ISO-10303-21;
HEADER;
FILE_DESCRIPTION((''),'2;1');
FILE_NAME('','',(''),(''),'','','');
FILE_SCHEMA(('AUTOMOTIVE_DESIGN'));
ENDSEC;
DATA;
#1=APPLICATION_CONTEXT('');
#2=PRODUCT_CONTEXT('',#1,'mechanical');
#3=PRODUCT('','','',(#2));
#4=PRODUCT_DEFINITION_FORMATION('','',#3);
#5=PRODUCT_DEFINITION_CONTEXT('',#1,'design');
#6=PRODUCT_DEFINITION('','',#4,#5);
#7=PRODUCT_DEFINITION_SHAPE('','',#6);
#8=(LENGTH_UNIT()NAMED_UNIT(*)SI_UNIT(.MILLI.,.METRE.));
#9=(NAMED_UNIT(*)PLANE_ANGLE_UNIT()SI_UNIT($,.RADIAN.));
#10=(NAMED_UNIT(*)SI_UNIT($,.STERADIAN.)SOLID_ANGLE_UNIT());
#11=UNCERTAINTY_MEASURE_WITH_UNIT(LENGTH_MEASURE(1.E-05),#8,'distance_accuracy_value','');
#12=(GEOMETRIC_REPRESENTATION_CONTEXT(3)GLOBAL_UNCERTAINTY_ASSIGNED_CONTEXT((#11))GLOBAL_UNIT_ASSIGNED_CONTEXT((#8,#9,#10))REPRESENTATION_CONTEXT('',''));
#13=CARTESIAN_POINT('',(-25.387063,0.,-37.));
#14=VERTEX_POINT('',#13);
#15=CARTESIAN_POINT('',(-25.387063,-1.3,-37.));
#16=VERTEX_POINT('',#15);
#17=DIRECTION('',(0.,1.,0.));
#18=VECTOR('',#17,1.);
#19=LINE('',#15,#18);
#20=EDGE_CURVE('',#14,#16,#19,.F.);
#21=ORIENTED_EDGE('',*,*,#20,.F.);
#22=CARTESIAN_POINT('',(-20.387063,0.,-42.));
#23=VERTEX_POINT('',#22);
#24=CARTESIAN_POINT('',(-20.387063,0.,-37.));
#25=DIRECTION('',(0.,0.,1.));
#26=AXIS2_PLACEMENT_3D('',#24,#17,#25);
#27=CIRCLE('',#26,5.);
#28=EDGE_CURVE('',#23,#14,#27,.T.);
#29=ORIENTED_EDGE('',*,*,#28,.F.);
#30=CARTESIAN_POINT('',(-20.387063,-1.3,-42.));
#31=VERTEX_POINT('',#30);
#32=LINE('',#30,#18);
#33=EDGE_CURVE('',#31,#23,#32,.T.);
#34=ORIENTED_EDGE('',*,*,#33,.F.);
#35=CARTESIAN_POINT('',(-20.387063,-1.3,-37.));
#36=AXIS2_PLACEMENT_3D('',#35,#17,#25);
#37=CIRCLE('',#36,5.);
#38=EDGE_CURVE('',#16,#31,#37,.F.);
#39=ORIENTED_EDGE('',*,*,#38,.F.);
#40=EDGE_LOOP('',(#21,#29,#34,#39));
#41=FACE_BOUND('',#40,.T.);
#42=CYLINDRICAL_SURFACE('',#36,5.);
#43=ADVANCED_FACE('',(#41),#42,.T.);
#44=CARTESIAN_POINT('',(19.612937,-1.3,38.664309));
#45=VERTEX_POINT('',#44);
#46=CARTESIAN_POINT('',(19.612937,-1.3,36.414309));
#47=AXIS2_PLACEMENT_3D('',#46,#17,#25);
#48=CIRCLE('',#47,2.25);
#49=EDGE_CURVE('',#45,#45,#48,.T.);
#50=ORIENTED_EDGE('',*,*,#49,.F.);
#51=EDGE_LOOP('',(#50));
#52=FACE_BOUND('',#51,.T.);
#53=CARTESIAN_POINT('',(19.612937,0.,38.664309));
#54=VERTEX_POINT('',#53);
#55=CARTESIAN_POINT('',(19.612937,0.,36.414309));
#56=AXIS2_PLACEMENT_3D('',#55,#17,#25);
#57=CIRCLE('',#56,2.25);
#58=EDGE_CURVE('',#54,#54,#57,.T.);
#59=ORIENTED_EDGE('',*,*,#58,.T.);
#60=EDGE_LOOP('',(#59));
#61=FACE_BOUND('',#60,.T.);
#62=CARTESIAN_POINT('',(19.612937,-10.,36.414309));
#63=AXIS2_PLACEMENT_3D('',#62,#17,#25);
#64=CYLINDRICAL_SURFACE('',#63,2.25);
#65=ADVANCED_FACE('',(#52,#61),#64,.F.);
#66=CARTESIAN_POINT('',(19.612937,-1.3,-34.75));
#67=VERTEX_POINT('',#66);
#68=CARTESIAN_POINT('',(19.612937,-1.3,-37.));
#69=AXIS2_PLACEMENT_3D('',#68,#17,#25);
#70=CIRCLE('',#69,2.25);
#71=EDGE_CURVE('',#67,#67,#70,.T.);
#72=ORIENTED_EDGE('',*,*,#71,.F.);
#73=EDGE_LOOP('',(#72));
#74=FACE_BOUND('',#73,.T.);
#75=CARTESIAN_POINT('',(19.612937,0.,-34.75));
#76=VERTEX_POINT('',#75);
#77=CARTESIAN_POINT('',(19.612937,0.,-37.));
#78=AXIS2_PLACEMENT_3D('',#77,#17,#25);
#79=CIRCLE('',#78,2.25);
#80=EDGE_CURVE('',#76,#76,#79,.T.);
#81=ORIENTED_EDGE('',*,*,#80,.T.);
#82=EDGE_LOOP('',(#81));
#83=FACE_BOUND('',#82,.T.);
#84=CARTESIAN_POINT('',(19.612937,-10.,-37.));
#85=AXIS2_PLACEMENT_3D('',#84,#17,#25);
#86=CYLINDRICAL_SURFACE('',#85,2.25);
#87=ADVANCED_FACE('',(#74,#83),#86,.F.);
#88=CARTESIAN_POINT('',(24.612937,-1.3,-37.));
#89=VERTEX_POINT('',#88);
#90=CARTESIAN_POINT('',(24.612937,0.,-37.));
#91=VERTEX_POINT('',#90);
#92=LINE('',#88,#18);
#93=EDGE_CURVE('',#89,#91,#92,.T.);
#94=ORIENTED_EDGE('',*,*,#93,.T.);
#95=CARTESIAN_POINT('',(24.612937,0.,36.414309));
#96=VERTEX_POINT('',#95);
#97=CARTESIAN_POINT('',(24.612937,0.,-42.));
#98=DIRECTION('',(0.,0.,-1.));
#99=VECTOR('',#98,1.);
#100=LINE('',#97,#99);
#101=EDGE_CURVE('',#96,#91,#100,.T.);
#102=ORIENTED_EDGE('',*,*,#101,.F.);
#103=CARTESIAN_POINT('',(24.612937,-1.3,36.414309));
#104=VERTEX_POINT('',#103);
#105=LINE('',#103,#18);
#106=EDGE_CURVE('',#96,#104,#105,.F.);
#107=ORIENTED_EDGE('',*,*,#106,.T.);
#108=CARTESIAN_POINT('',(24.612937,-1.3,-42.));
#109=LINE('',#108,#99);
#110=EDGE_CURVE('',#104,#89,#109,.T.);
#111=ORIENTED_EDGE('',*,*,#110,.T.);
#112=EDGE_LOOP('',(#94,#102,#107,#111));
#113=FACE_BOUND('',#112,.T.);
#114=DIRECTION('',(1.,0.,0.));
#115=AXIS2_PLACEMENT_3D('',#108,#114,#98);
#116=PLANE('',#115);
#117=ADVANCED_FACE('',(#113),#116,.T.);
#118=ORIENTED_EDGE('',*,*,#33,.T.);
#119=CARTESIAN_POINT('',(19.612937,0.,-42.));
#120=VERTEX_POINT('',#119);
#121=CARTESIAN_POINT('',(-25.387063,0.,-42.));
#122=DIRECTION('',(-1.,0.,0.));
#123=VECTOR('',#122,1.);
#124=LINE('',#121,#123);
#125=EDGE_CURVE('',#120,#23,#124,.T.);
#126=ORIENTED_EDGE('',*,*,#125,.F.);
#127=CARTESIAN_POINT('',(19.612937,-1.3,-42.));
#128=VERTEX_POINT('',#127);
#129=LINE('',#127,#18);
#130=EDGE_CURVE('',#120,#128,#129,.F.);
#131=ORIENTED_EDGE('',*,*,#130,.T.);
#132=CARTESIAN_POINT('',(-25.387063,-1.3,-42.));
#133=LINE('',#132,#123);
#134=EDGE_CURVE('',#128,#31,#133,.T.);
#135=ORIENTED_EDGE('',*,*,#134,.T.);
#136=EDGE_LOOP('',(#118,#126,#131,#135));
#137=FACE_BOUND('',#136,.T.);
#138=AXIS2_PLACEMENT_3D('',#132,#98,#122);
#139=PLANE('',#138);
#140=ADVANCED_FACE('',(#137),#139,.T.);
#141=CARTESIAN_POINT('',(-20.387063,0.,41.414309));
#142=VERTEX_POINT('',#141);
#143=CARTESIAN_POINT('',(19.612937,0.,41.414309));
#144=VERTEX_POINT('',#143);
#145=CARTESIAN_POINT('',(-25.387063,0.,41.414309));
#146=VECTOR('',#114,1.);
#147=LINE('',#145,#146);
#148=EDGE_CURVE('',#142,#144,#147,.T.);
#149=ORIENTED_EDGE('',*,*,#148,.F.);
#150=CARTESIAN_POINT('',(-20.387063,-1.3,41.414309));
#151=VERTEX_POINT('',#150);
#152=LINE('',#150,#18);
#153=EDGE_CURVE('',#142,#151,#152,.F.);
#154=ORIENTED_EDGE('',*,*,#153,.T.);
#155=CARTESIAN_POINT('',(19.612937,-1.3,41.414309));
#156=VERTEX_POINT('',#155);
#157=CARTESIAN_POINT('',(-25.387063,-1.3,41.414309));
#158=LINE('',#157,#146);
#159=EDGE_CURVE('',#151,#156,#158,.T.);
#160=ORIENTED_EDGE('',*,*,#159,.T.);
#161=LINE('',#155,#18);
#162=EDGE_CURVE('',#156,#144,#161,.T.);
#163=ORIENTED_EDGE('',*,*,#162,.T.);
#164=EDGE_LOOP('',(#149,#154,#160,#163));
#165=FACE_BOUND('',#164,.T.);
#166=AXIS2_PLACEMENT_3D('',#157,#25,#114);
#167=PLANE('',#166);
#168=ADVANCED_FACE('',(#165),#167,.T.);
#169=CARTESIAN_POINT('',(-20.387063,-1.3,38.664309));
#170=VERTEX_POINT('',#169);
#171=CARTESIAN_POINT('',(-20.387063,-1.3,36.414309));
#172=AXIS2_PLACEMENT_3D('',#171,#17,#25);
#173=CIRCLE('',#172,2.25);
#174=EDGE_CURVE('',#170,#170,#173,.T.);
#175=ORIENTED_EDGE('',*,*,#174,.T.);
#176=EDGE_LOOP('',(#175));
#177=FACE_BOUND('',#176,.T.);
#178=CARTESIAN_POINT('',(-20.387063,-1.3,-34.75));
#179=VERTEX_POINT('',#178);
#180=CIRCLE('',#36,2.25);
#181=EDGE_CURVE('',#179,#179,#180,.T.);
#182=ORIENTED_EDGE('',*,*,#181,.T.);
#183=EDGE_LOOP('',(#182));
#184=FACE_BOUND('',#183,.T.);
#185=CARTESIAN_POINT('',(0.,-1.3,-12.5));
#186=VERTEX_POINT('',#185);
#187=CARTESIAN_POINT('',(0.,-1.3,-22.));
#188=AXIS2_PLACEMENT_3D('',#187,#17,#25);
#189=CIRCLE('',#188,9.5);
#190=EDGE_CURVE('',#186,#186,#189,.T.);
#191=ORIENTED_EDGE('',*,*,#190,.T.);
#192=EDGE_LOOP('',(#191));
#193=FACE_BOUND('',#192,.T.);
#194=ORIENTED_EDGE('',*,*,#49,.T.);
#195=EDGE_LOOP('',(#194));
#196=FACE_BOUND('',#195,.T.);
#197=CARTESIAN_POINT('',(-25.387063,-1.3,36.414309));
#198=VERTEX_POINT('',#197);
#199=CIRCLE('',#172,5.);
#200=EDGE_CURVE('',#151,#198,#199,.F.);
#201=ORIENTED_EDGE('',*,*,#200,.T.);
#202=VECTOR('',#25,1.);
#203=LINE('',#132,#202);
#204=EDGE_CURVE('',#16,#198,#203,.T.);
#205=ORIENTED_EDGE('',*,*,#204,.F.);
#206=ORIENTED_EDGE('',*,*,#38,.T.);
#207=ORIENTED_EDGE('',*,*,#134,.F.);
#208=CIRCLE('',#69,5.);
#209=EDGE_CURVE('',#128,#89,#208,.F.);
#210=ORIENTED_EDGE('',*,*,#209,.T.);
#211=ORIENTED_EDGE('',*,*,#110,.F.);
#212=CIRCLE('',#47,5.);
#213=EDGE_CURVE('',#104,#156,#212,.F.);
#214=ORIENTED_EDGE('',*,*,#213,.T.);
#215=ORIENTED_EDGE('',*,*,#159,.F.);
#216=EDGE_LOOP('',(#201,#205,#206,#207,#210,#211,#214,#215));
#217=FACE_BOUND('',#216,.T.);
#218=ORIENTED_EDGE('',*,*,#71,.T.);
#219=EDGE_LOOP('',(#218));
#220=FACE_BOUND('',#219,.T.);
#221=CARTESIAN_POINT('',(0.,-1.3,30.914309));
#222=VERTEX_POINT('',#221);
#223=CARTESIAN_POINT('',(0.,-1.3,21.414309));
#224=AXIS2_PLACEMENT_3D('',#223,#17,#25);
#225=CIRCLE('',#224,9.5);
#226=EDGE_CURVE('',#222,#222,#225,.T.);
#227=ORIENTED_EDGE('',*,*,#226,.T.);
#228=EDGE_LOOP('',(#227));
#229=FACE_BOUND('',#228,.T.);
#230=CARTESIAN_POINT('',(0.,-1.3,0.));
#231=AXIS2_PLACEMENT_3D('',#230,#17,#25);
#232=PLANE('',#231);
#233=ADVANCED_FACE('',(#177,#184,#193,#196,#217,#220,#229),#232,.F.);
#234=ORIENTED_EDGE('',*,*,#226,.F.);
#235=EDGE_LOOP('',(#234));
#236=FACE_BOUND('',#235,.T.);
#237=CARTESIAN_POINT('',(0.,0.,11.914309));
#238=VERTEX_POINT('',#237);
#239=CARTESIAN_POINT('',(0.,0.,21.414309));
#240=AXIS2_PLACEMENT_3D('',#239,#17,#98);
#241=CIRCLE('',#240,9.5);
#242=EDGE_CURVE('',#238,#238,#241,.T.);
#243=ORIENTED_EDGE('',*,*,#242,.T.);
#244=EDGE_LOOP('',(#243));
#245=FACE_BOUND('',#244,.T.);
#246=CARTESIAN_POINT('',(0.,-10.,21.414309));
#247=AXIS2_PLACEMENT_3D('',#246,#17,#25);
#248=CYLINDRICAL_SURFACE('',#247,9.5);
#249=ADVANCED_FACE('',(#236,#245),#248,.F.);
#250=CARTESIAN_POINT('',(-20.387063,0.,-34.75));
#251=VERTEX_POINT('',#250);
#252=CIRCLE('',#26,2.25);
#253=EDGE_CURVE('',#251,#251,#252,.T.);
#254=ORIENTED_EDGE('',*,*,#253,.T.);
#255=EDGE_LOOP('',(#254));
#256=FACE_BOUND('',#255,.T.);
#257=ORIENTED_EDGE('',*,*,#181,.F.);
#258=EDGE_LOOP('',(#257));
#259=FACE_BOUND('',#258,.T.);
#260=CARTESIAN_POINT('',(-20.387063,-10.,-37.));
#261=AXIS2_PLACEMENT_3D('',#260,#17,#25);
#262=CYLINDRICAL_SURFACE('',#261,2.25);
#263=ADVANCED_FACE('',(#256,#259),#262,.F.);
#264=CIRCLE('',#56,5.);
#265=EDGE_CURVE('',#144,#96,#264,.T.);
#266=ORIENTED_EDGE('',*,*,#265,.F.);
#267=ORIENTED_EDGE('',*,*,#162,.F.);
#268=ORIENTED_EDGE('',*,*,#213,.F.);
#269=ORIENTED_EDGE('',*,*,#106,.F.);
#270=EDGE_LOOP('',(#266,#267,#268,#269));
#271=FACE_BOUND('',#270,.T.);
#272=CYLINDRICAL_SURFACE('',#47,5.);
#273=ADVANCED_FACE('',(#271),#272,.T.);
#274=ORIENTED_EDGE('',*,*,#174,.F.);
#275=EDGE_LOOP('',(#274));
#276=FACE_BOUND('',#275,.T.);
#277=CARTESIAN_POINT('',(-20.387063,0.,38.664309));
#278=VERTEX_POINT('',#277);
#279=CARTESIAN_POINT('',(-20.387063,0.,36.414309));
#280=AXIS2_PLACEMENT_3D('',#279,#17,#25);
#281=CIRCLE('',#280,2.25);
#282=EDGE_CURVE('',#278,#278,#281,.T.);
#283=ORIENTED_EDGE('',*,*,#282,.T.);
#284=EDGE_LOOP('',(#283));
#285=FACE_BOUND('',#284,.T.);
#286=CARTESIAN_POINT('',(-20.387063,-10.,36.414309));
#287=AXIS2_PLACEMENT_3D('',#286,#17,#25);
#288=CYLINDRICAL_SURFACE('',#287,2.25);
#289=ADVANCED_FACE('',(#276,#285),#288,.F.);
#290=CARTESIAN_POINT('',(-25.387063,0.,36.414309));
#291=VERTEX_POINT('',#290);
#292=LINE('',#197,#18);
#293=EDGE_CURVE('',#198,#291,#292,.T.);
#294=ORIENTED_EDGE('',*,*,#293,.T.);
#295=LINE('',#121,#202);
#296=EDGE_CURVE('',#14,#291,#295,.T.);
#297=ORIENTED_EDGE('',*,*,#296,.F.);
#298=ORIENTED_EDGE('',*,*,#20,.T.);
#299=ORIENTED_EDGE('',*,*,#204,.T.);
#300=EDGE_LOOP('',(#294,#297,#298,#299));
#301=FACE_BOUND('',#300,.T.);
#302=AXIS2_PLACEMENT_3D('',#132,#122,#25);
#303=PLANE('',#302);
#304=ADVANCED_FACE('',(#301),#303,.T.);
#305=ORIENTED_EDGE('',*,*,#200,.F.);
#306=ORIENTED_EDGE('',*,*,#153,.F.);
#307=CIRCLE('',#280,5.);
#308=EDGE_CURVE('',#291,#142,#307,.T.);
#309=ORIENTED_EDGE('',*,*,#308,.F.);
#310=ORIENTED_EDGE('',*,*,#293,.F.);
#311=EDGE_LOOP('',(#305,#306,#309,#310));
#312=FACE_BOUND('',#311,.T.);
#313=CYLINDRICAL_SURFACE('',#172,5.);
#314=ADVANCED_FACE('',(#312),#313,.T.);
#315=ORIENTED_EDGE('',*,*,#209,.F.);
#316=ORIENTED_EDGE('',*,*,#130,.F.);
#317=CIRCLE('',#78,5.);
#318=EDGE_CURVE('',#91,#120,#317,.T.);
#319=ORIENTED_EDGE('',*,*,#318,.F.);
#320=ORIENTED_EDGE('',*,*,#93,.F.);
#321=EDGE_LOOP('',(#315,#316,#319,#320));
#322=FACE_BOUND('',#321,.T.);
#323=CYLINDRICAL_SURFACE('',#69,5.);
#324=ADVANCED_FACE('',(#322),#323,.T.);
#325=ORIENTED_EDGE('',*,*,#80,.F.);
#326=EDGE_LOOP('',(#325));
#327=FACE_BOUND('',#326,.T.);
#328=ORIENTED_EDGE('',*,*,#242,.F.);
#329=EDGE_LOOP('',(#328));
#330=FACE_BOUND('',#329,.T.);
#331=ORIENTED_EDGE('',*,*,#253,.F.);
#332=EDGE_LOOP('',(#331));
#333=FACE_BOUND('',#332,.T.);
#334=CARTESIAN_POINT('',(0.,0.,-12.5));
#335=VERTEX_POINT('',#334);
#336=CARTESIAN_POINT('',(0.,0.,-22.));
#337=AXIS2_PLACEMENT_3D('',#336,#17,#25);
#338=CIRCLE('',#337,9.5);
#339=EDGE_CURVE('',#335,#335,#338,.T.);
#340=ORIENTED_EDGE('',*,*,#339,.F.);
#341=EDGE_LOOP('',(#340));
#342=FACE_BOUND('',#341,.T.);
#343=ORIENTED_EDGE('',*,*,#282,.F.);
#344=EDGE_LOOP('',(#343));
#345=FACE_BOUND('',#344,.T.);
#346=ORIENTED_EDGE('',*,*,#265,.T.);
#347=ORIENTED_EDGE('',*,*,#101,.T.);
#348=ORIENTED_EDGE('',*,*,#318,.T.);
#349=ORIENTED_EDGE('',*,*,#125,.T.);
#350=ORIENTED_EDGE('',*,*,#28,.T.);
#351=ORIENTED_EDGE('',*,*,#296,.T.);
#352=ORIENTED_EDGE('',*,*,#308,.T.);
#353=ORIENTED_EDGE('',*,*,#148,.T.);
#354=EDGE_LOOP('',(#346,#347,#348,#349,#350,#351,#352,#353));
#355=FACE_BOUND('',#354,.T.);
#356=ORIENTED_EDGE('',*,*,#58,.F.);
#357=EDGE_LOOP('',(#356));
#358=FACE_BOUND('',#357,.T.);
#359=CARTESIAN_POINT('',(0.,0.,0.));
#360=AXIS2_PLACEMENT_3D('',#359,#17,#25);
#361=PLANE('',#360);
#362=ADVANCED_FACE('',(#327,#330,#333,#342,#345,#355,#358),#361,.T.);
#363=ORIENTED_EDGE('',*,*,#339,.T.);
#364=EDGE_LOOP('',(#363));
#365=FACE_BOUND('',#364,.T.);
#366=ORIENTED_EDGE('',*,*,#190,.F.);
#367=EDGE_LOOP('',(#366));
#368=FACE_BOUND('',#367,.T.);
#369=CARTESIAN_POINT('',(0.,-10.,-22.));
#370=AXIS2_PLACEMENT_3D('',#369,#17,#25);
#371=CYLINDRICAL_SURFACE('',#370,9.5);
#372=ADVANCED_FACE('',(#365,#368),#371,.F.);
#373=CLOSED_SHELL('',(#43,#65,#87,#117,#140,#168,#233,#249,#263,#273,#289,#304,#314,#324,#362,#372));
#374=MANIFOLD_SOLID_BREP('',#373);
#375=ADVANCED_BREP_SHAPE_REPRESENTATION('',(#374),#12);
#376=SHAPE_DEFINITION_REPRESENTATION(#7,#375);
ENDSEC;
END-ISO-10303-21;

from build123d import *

# Parameters (mm, degrees)
SKETCH1_W          = 50
SKETCH1_H          = 83.414309181
BASE_FLANGE1_DEPTH = 1.3
FILLET1_R          = 5
SKETCH6_R          = 9.5
CUT_EXTRUDE1_DEPTH = 10
SKETCH7_R          = 2.25
CUT_EXTRUDE2_DEPTH = 10


# Sheet-metal steps are written as plain solids
with BuildPart() as part:
    # Sketch1 → Base-Flange1 (new body)
    with BuildSketch(Plane(origin=(0, 0, 0), x_dir=(1, 0, 0), z_dir=(0, 1, 0))):
        with Locations((-0.387063477, 0.292845409)):
            Rectangle(SKETCH1_W, SKETCH1_H)
    extrude(amount=-BASE_FLANGE1_DEPTH)

    # Fillet1
    fillet1_edges = [part.edges().sort_by_distance(p)[0] for p in [
        (24.612936523, -0.65, 41.414309181),
        (-25.387063477, -0.65, 41.414309181),
        (-25.387063477, -0.65, -42),
        (24.612936523, -0.65, -42),
    ]]
    fillet(fillet1_edges, radius=FILLET1_R)

    # Sketch6 → Cut-Extrude1 (cut)
    with BuildSketch(Plane(origin=(0, 0, 0), x_dir=(1, 0, 0), z_dir=(0, 1, 0))):
        with Locations(Location((0, 22, 0), (0, 0, 270))):
            Circle(SKETCH6_R)
        with Locations(Location((0, -21.414309181, 0), (0, 0, 270))):
            Circle(SKETCH6_R)
    extrude(amount=-CUT_EXTRUDE1_DEPTH, mode=Mode.SUBTRACT)

    # Sketch7 → Cut-Extrude2 (cut)
    with BuildSketch(Plane(origin=(0, 0, 0), x_dir=(1, 0, 0), z_dir=(0, 1, 0))):
        with Locations(Location((19.612936523, 37, 0), (0, 0, 270))):
            Circle(SKETCH7_R)
        with Locations(Location((-20.387063477, 37, 0), (0, 0, 270))):
            Circle(SKETCH7_R)
        with Locations(Location((-20.387063477, -36.414309181, 0), (0, 0, 270))):
            Circle(SKETCH7_R)
        with Locations(Location((19.612936523, -36.414309181, 0), (0, 0, 270))):
            Circle(SKETCH7_R)
    extrude(amount=-CUT_EXTRUDE2_DEPTH, mode=Mode.SUBTRACT)


solid = part.part
